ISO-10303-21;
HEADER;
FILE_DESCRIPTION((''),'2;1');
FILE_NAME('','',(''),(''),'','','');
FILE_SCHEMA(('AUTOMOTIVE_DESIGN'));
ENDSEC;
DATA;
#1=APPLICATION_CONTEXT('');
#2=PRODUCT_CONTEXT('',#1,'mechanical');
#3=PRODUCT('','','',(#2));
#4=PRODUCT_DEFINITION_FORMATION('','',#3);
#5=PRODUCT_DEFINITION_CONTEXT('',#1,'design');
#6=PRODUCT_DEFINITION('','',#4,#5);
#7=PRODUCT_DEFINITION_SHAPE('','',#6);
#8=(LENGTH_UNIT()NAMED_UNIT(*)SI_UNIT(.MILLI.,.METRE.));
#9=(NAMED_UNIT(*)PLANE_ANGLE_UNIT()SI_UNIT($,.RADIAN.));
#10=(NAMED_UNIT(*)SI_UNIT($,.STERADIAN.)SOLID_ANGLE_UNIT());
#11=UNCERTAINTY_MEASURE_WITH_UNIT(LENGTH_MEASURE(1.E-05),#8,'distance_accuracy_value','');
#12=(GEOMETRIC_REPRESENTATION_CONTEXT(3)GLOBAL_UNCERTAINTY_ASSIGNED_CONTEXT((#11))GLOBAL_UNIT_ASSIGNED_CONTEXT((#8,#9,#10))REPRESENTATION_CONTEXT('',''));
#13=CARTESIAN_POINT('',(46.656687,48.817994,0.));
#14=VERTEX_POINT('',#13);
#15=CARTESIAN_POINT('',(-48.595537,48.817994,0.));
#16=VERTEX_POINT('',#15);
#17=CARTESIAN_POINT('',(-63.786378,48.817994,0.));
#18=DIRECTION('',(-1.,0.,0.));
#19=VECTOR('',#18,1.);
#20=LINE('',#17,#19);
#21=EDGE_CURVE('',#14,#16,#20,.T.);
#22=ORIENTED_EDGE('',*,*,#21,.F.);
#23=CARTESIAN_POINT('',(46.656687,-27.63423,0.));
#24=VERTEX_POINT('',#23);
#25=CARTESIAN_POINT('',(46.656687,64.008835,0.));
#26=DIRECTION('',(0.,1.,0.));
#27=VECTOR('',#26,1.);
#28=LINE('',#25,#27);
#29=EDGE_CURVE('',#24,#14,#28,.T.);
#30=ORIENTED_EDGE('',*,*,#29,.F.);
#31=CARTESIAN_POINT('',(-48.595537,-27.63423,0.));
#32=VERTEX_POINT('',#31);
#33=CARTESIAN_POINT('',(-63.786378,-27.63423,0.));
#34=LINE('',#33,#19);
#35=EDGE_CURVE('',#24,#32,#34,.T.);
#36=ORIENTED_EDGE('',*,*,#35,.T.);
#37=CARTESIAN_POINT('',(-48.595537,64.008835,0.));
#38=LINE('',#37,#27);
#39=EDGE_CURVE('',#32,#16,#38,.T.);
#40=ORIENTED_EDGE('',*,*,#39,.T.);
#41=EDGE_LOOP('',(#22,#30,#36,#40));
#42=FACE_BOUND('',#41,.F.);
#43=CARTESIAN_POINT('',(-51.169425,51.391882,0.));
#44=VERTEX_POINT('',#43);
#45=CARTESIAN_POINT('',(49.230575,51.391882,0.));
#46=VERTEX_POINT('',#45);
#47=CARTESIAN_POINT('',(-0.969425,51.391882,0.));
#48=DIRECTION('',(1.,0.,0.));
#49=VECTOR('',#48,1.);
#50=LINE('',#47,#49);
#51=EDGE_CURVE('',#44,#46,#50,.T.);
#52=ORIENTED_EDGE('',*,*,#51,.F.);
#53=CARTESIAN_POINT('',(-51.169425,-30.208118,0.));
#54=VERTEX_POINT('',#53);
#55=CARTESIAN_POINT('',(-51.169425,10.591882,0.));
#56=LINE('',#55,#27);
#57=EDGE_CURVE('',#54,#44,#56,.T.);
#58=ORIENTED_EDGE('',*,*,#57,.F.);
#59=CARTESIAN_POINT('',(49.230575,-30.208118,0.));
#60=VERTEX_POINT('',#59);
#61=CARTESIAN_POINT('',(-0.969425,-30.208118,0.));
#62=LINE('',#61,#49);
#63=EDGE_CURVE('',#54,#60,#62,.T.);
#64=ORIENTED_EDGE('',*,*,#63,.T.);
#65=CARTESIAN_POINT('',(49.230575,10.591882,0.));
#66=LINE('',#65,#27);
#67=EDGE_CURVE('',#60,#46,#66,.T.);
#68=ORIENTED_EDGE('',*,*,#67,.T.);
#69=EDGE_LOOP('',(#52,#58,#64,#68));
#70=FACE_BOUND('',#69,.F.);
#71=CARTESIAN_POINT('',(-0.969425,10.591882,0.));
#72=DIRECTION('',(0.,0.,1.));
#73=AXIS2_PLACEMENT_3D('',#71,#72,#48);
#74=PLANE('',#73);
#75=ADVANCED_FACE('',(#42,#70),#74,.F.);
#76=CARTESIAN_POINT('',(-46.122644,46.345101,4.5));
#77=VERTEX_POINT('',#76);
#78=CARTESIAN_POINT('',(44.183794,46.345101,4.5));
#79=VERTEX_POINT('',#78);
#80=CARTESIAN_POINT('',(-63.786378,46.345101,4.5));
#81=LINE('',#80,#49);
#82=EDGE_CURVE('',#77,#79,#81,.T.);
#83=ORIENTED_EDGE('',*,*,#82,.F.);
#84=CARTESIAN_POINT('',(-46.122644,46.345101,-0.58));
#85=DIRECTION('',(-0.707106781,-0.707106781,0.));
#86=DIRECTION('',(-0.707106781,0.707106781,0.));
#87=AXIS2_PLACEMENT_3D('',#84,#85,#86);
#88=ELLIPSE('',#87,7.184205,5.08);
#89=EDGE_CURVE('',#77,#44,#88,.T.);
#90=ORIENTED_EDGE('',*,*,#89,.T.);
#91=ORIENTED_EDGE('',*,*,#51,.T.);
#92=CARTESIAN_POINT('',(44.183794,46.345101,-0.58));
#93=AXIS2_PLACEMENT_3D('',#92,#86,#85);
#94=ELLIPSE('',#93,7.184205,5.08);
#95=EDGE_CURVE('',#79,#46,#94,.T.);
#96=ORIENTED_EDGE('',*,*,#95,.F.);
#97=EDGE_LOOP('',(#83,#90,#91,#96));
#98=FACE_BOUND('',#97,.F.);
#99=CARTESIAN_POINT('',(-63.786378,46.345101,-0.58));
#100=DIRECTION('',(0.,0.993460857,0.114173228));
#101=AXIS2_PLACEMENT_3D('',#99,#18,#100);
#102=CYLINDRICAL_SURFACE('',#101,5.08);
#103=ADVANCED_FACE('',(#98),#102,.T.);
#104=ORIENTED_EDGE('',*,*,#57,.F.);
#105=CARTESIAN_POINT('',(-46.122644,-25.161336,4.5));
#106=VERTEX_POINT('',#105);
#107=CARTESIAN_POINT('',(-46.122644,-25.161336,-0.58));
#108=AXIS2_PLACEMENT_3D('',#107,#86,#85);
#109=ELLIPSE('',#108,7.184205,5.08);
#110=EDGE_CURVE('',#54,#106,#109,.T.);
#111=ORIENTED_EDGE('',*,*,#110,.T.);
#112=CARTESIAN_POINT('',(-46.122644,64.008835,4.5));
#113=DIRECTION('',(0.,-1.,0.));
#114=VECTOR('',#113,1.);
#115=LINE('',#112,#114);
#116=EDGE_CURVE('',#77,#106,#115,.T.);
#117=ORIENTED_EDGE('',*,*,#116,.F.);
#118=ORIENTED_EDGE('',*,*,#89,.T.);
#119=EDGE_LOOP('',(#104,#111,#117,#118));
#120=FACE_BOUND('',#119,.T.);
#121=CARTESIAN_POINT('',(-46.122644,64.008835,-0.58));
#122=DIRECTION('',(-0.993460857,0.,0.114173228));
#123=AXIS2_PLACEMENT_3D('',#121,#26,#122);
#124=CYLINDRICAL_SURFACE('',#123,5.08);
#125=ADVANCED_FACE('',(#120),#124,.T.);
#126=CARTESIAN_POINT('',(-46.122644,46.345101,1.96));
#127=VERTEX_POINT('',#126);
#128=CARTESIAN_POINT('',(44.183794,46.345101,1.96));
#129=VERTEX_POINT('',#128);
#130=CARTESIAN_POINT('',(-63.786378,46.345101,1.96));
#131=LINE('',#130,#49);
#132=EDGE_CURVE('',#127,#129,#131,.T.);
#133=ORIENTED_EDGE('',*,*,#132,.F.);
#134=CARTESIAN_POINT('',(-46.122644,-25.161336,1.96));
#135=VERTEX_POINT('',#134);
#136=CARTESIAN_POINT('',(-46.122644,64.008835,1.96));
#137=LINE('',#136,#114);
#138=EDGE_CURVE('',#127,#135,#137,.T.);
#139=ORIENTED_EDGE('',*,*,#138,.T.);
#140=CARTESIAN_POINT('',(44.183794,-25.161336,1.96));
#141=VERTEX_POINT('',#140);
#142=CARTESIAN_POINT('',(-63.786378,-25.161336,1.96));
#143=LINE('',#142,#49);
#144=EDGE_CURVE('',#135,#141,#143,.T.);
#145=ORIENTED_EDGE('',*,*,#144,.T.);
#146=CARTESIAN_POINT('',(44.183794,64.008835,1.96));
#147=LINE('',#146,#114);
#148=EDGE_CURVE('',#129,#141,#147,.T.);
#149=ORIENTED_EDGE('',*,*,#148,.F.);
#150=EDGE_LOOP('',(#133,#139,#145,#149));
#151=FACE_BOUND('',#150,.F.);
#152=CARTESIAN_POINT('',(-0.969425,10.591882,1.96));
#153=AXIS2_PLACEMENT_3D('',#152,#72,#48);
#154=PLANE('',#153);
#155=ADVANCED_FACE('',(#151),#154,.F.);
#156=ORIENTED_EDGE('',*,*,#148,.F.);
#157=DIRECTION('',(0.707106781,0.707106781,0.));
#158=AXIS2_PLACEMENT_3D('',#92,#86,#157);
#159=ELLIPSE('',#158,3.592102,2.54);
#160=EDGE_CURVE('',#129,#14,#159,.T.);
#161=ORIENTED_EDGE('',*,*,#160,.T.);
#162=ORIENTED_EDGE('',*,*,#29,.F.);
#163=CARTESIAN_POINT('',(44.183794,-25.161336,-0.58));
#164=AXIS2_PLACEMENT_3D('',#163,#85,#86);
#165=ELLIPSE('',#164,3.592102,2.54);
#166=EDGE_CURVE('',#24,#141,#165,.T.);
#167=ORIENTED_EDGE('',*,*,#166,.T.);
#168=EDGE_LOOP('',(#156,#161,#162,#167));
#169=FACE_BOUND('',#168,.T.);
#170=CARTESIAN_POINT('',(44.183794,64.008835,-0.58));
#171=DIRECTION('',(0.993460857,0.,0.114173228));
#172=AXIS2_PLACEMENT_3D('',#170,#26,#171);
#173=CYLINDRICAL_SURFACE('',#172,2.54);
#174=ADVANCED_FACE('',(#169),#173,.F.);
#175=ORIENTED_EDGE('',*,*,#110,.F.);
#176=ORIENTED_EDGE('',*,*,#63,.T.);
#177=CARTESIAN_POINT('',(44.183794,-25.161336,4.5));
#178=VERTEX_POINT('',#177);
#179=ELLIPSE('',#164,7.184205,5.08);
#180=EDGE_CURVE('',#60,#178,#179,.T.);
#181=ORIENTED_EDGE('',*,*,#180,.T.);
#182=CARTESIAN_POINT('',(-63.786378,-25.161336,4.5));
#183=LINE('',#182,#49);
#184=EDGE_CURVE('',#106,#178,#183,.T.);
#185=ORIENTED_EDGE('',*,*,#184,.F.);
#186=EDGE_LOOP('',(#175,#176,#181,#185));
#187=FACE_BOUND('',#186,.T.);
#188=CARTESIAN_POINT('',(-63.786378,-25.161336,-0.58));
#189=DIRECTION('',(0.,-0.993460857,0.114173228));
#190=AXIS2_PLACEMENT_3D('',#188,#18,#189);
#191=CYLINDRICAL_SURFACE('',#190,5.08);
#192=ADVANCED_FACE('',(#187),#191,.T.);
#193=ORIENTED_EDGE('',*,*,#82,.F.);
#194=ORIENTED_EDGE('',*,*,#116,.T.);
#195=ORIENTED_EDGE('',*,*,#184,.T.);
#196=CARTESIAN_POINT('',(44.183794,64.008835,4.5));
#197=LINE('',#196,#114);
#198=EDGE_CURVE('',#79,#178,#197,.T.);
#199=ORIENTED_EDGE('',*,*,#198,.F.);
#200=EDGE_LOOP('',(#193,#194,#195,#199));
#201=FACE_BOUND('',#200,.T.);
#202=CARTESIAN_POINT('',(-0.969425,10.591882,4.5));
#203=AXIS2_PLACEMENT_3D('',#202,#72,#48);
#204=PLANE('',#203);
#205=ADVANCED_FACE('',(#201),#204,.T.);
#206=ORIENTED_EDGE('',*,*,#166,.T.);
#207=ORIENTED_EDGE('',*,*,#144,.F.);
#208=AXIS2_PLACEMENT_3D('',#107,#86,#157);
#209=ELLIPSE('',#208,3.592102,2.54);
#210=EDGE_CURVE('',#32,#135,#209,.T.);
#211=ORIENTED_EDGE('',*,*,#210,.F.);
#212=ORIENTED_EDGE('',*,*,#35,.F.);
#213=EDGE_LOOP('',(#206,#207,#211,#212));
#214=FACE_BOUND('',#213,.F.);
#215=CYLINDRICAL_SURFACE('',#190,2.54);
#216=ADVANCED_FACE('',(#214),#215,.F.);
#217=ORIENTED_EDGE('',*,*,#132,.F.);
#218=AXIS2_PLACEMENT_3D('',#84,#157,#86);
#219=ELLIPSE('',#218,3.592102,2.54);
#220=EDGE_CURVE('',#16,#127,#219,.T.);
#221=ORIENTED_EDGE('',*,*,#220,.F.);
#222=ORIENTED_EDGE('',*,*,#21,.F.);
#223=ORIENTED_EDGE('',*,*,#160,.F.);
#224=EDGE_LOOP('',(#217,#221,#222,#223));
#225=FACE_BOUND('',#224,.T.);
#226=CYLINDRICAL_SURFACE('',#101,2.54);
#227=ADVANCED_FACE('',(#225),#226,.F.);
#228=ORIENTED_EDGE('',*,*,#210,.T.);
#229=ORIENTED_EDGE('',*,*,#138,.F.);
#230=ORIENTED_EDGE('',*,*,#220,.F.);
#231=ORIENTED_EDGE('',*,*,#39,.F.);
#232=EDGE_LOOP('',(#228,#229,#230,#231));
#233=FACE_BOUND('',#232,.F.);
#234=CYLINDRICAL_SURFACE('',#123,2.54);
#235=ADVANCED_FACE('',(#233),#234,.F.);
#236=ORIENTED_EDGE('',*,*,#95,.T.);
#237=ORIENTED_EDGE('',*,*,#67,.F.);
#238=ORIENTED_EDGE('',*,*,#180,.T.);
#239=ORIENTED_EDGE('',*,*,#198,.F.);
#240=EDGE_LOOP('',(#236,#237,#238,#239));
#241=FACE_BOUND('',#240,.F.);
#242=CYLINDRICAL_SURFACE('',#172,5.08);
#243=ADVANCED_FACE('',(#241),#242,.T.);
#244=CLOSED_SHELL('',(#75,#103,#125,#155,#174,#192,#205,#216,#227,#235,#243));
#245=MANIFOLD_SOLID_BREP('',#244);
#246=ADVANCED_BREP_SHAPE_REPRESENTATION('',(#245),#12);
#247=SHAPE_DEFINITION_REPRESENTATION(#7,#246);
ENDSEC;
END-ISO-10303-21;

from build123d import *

# Parameters (mm, degrees)
F0_W        = 100.4
F0_H        = 81.6
F1_DEPTH    = 4.5
F2_T1_DEPTH = 125.6339057619
F2_T3_DEPTH = 106.8339057619
F3_T        = -2.54


# Not quite as in the source:
# - a fillet or chamfer that OpenCascade refuses, or shapes differently, is made with other operations: its cross-section is extruded or revolved along the edge and cut away or added


with BuildPart() as f1:
    # F0 (on Top) → F1 (new body)
    with BuildSketch(Plane.XY):
        with Locations((-0.9694248438, 10.5918823534)):
            Rectangle(F0_W, F0_H)
    extrude(amount=F1_DEPTH)

    # F2: fillet of radius 5.08 on 4 edges, made by hand

    # F2_s2 → F2_t1 (cut)
    with BuildSketch(Plane.YZ.offset(-63.7863777247)):
        with BuildLine():
            ThreePointArc((51.3918823534, 0), (49.7259295019, 3.2116223441), (46.345101201, 4.5))
            Line((46.345101201, 4.5), (51.3918823534, 4.5))
            Line((51.3918823534, 4.5), (51.3918823534, 0))
        make_face()
        with BuildLine():
            ThreePointArc((-30.2081176466, 0), (-28.5421647951, 3.2116223441), (-25.1613364942, 4.5))
            Line((-25.1613364942, 4.5), (-30.2081176466, 4.5))
            Line((-30.2081176466, 4.5), (-30.2081176466, 0))
        make_face()
    extrude(amount=F2_T1_DEPTH, mode=Mode.SUBTRACT)

    # F2_s4 → F2_t3 (cut)
    with BuildSketch(Plane.XZ.offset(-64.0088352343)):
        with BuildLine():
            ThreePointArc((-51.1694248438, 0), (-49.5034719923, 3.2116223441), (-46.1226436914, 4.5))
            Line((-46.1226436914, 4.5), (-51.1694248438, 4.5))
            Line((-51.1694248438, 4.5), (-51.1694248438, 0))
        make_face()
        with BuildLine():
            ThreePointArc((49.2305751562, 0), (47.5646223047, 3.2116223441), (44.1837940038, 4.5))
            Line((44.1837940038, 4.5), (49.2305751562, 4.5))
            Line((49.2305751562, 4.5), (49.2305751562, 0))
        make_face()
    extrude(amount=F2_T3_DEPTH, mode=Mode.SUBTRACT)

    # F3
    f3_openings = [f1.faces().sort_by_distance(p)[0] for p in [
        (-0.969425, 10.591882, 0),
    ]]
    offset(amount=F3_T, openings=f3_openings)


solid = f1.part
